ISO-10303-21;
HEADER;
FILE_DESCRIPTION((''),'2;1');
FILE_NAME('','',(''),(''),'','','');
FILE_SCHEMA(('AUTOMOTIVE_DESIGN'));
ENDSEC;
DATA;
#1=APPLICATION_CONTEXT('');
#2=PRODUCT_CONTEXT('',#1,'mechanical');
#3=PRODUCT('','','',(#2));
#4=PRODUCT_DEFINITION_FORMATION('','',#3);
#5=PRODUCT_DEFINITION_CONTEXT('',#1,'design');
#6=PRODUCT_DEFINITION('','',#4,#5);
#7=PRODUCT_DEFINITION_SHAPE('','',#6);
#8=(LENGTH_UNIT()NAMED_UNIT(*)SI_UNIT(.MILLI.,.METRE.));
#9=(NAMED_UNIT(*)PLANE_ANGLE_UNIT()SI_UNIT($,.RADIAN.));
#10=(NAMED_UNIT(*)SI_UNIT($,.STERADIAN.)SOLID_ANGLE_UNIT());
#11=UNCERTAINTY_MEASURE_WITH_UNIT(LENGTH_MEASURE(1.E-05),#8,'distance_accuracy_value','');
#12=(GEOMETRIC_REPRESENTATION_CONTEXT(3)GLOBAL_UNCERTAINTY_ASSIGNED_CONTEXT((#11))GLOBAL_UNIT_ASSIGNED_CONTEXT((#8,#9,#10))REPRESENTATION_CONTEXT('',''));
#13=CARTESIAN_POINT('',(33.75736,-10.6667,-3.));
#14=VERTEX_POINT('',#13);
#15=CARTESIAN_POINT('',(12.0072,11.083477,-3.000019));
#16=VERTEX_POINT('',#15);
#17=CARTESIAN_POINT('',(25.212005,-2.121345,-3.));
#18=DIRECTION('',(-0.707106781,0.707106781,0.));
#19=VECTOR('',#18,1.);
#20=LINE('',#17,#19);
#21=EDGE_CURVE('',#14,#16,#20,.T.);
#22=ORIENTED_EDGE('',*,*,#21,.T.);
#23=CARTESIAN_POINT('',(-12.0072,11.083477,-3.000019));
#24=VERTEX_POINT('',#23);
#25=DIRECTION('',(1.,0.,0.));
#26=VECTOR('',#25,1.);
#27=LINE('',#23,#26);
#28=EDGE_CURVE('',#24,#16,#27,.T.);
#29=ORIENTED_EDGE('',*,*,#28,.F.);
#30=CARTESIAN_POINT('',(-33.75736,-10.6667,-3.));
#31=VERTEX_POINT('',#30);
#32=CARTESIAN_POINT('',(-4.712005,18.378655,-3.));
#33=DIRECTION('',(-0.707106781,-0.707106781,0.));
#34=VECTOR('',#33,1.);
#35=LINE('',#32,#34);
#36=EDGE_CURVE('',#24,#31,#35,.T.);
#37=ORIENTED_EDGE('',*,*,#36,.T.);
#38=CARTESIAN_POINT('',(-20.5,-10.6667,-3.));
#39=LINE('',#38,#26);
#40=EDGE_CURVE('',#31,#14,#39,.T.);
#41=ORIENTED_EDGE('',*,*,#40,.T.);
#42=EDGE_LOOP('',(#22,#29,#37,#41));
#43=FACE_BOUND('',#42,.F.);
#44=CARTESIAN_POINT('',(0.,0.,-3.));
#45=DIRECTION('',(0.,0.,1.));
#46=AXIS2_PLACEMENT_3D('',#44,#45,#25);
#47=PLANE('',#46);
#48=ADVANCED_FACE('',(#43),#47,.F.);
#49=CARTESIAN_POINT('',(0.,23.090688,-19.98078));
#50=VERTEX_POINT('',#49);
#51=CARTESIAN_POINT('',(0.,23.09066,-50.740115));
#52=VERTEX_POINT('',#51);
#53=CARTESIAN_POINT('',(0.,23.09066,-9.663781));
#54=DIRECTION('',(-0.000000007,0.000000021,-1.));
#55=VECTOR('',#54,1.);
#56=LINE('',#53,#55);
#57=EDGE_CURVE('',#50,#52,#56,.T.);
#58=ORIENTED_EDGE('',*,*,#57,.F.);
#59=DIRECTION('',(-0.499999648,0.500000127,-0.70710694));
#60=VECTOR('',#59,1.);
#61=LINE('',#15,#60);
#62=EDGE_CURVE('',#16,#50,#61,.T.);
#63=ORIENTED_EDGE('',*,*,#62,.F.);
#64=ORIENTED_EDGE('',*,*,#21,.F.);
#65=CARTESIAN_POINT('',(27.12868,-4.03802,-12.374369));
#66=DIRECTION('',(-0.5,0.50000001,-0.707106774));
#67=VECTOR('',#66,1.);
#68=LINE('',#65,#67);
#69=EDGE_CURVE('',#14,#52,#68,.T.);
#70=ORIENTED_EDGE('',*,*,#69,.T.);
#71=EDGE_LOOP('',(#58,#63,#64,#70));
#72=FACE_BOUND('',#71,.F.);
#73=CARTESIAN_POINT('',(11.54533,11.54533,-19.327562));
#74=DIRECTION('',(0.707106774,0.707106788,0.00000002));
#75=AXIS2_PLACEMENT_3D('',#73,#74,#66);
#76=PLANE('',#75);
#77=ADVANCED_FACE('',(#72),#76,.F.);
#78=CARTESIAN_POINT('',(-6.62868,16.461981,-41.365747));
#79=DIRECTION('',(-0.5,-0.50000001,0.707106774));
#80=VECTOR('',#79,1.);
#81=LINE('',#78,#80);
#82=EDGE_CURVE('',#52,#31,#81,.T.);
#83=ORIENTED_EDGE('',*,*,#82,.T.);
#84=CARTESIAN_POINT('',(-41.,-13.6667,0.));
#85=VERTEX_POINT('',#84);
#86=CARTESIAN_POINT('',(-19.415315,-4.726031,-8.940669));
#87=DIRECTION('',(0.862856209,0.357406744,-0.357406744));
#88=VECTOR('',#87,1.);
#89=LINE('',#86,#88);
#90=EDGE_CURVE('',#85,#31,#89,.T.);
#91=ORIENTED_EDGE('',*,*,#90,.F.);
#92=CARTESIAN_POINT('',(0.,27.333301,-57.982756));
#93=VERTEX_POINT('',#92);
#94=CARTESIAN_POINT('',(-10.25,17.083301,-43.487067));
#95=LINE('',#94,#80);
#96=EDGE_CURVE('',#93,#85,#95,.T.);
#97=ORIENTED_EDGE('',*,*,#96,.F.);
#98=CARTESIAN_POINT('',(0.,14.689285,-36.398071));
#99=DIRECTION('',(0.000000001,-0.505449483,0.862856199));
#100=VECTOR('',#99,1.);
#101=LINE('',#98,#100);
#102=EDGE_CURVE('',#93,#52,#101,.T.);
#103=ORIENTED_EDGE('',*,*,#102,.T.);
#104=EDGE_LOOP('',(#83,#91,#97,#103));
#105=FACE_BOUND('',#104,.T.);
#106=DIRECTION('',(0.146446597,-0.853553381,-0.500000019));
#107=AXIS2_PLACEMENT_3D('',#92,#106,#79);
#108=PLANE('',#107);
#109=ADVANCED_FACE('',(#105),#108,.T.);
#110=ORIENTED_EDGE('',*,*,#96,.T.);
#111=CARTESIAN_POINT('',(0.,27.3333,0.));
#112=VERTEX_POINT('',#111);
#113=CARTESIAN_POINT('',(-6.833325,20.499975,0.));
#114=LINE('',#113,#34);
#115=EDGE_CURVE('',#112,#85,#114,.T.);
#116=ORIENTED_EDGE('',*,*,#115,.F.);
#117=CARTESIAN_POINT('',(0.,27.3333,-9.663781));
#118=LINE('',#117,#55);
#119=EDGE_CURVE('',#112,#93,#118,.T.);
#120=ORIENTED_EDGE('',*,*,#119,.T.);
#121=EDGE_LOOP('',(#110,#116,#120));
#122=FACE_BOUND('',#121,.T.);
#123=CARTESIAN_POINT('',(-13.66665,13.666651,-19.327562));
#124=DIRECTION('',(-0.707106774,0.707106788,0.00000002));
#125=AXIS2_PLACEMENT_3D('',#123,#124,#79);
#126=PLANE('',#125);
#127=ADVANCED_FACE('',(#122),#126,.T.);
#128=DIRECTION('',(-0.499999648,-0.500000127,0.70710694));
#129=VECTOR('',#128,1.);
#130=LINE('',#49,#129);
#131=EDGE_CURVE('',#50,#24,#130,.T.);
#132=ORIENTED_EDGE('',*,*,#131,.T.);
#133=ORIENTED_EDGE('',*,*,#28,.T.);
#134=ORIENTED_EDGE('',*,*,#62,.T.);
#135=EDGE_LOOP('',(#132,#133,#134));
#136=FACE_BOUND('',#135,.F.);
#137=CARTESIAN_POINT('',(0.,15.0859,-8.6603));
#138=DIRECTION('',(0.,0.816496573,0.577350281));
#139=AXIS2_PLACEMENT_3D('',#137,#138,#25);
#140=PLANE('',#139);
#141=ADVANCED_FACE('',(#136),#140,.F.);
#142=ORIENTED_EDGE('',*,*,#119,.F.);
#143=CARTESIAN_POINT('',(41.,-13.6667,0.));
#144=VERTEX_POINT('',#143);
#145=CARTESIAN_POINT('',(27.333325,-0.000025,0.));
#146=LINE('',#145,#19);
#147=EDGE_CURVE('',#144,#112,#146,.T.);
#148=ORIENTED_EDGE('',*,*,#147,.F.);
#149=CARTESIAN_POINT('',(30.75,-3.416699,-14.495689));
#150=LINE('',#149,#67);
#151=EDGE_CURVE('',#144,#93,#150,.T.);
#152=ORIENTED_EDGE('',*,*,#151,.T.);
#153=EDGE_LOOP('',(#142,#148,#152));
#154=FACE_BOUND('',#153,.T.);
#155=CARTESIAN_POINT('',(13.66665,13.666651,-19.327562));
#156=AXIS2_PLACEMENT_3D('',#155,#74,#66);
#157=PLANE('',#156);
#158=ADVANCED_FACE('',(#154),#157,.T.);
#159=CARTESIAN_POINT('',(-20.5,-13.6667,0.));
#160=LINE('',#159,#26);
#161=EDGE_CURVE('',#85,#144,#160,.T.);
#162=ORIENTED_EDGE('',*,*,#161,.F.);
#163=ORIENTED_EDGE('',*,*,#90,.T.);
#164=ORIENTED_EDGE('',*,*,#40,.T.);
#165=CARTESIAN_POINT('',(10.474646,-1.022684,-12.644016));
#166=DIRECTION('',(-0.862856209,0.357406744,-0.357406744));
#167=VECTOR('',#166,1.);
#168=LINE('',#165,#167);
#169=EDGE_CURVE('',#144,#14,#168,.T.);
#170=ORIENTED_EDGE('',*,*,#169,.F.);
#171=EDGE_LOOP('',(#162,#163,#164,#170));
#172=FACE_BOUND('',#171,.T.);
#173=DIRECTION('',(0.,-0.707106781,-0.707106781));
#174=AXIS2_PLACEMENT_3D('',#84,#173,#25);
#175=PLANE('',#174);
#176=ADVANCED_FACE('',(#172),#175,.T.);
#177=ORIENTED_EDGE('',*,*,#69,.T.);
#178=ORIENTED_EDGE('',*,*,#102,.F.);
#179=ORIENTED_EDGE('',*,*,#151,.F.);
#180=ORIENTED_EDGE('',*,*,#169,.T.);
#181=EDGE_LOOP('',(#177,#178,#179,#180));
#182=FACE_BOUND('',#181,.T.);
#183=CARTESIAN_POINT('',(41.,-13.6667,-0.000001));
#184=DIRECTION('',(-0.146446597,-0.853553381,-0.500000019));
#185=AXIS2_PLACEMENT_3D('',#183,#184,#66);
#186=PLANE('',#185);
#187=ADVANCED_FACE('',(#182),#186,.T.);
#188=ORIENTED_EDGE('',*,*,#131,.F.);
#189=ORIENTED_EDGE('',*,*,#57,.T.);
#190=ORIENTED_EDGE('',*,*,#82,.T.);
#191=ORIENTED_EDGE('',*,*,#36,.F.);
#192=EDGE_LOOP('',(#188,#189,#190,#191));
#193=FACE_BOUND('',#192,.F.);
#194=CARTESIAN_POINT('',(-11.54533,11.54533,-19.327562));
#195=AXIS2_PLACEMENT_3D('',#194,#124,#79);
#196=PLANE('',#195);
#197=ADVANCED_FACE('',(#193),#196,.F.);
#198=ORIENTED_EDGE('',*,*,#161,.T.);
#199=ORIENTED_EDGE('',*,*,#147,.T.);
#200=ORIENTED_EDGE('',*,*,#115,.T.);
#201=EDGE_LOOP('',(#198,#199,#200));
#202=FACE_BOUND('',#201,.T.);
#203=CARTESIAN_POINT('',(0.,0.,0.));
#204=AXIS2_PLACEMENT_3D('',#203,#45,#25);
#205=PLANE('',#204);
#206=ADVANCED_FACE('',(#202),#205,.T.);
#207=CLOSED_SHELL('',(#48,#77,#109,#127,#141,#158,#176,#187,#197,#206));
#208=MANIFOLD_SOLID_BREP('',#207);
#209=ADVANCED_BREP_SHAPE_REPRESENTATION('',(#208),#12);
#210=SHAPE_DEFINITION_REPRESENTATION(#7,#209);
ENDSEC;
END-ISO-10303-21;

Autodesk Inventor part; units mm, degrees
ref_plane "YZ Plane" through (0, 0, 0) normal (1, 0, 0) x (0, 1, 0)
sketch "Sketch3" plane through (0, 0, 0) normal (0, 0, 1) x (1, 0, 0)
  line L0 (0, 27.3333) -> (-41, -13.6667)
  line L1 (-41, -13.6667) -> (41, -13.6667)
  line L2 (41, -13.6667) -> (0, 27.3333)
  line L3 (41, -13.6667) -> (-20.5, 6.8333) construction
  line L4 (-41, -13.6667) -> (20.5, 6.8333) construction
  point P0 (0, 0)
  dimension "d7" = 90
  dimension "d8" = 45
  dimension "d9" = 82
extrude "Extrusion1" add sketch "Sketch3" against normal blind 3 draft -45
sketch "Sketch4" plane through (0, 0, 0) normal (0, 0, 1) x (1, 0, 0)
  line L0 (-33.7574, -10.6667) -> (33.7574, -10.6667) projected
  line L1 (0, 23.0907) -> (-33.7574, -10.6667) projected
  point P0 (0, 0)
  point P1 (0, -10.6667)
ref_plane "Work Plane2" through (0, -10.6667, 0) normal (-1, 0, 0) x (0, 1, 0)
sketch "Sketch5" plane through (0, -10.6667, 0) normal (-1, 0, 0) x (0, 1, 0)
  line L0 (38, 0) -> (-3, 0) construction
  line L1 (-3, 0) -> (10.6667, 19.3276) construction
  line L2 (38, 0) -> (10.6667, 19.3276)
  line L3 (-3, 0) -> (38, 0) projected
  point P0 (10.6667, 0)
  dimension "d18" = 23.6714
pattern_circular "Circular Pattern1" count 3 over 360 about axis through (0, 27.3333, 0) along (0, -0.8164966, -0.5773503) of "Extrusion1"
sketch "Sketch6" plane through (0, -10.6667, 0) normal (-1, 0, 0) x (0, 1, 0)
  line L0 (38, 0) -> (-3, 0) projected
  line L1 (38, 0) -> (38, 57.9828) projected
  line L2 (38, 57.9828) -> (-3, 0) projected
  line L3 (38, 0) -> (-3, 0) projected
  line L4 (48.9333, -7.731) -> (-27.6, 46.3862) projected
  point P0 (10.6667, 0)
  point P1 (25.7526, 8.6603)
  dimension "d20" = 15
ref_plane "Work Plane4" through (0, 15.0859, -8.6603) normal (0, 0.8164966, 0.5773503) x (1, 0, 0)
ref_plane "Work Plane3" through (-41, -13.6667, 0) normal (0, 0.8164966, 0.5773503) x (1, 0, 0)
sketch "Sketch7" plane through (0, 15.0859, -8.6603) normal (0, 0.8164966, 0.5773503) x (1, 0, 0)
  line L0 (12.0072, -6.9324) -> (0, 13.8647) projected
  line L1 (0, 13.8647) -> (-12.0072, -6.9324) projected
  line L2 (-12.0072, -6.9324) -> (12.0072, -6.9324) projected
  line L3 (0, 21.2132) -> (18.3712, -10.6066) projected
  line L4 (18.3712, -10.6066) -> (-18.3712, -10.6066) projected
  line L5 (-18.3712, -10.6066) -> (0, 21.2132) projected
  line L6 (-12.0072, -6.9324) -> (0, 13.8647)
  line L7 (12.0072, -6.9324) -> (0, 13.8647)
  line L8 (12.0072, -6.9324) -> (-12.0072, -6.9324)
  point P0 (0, -15.7809)
extrude "Extrusion2" add sketch "Sketch7" along normal up to next contours L2 L1 L0
